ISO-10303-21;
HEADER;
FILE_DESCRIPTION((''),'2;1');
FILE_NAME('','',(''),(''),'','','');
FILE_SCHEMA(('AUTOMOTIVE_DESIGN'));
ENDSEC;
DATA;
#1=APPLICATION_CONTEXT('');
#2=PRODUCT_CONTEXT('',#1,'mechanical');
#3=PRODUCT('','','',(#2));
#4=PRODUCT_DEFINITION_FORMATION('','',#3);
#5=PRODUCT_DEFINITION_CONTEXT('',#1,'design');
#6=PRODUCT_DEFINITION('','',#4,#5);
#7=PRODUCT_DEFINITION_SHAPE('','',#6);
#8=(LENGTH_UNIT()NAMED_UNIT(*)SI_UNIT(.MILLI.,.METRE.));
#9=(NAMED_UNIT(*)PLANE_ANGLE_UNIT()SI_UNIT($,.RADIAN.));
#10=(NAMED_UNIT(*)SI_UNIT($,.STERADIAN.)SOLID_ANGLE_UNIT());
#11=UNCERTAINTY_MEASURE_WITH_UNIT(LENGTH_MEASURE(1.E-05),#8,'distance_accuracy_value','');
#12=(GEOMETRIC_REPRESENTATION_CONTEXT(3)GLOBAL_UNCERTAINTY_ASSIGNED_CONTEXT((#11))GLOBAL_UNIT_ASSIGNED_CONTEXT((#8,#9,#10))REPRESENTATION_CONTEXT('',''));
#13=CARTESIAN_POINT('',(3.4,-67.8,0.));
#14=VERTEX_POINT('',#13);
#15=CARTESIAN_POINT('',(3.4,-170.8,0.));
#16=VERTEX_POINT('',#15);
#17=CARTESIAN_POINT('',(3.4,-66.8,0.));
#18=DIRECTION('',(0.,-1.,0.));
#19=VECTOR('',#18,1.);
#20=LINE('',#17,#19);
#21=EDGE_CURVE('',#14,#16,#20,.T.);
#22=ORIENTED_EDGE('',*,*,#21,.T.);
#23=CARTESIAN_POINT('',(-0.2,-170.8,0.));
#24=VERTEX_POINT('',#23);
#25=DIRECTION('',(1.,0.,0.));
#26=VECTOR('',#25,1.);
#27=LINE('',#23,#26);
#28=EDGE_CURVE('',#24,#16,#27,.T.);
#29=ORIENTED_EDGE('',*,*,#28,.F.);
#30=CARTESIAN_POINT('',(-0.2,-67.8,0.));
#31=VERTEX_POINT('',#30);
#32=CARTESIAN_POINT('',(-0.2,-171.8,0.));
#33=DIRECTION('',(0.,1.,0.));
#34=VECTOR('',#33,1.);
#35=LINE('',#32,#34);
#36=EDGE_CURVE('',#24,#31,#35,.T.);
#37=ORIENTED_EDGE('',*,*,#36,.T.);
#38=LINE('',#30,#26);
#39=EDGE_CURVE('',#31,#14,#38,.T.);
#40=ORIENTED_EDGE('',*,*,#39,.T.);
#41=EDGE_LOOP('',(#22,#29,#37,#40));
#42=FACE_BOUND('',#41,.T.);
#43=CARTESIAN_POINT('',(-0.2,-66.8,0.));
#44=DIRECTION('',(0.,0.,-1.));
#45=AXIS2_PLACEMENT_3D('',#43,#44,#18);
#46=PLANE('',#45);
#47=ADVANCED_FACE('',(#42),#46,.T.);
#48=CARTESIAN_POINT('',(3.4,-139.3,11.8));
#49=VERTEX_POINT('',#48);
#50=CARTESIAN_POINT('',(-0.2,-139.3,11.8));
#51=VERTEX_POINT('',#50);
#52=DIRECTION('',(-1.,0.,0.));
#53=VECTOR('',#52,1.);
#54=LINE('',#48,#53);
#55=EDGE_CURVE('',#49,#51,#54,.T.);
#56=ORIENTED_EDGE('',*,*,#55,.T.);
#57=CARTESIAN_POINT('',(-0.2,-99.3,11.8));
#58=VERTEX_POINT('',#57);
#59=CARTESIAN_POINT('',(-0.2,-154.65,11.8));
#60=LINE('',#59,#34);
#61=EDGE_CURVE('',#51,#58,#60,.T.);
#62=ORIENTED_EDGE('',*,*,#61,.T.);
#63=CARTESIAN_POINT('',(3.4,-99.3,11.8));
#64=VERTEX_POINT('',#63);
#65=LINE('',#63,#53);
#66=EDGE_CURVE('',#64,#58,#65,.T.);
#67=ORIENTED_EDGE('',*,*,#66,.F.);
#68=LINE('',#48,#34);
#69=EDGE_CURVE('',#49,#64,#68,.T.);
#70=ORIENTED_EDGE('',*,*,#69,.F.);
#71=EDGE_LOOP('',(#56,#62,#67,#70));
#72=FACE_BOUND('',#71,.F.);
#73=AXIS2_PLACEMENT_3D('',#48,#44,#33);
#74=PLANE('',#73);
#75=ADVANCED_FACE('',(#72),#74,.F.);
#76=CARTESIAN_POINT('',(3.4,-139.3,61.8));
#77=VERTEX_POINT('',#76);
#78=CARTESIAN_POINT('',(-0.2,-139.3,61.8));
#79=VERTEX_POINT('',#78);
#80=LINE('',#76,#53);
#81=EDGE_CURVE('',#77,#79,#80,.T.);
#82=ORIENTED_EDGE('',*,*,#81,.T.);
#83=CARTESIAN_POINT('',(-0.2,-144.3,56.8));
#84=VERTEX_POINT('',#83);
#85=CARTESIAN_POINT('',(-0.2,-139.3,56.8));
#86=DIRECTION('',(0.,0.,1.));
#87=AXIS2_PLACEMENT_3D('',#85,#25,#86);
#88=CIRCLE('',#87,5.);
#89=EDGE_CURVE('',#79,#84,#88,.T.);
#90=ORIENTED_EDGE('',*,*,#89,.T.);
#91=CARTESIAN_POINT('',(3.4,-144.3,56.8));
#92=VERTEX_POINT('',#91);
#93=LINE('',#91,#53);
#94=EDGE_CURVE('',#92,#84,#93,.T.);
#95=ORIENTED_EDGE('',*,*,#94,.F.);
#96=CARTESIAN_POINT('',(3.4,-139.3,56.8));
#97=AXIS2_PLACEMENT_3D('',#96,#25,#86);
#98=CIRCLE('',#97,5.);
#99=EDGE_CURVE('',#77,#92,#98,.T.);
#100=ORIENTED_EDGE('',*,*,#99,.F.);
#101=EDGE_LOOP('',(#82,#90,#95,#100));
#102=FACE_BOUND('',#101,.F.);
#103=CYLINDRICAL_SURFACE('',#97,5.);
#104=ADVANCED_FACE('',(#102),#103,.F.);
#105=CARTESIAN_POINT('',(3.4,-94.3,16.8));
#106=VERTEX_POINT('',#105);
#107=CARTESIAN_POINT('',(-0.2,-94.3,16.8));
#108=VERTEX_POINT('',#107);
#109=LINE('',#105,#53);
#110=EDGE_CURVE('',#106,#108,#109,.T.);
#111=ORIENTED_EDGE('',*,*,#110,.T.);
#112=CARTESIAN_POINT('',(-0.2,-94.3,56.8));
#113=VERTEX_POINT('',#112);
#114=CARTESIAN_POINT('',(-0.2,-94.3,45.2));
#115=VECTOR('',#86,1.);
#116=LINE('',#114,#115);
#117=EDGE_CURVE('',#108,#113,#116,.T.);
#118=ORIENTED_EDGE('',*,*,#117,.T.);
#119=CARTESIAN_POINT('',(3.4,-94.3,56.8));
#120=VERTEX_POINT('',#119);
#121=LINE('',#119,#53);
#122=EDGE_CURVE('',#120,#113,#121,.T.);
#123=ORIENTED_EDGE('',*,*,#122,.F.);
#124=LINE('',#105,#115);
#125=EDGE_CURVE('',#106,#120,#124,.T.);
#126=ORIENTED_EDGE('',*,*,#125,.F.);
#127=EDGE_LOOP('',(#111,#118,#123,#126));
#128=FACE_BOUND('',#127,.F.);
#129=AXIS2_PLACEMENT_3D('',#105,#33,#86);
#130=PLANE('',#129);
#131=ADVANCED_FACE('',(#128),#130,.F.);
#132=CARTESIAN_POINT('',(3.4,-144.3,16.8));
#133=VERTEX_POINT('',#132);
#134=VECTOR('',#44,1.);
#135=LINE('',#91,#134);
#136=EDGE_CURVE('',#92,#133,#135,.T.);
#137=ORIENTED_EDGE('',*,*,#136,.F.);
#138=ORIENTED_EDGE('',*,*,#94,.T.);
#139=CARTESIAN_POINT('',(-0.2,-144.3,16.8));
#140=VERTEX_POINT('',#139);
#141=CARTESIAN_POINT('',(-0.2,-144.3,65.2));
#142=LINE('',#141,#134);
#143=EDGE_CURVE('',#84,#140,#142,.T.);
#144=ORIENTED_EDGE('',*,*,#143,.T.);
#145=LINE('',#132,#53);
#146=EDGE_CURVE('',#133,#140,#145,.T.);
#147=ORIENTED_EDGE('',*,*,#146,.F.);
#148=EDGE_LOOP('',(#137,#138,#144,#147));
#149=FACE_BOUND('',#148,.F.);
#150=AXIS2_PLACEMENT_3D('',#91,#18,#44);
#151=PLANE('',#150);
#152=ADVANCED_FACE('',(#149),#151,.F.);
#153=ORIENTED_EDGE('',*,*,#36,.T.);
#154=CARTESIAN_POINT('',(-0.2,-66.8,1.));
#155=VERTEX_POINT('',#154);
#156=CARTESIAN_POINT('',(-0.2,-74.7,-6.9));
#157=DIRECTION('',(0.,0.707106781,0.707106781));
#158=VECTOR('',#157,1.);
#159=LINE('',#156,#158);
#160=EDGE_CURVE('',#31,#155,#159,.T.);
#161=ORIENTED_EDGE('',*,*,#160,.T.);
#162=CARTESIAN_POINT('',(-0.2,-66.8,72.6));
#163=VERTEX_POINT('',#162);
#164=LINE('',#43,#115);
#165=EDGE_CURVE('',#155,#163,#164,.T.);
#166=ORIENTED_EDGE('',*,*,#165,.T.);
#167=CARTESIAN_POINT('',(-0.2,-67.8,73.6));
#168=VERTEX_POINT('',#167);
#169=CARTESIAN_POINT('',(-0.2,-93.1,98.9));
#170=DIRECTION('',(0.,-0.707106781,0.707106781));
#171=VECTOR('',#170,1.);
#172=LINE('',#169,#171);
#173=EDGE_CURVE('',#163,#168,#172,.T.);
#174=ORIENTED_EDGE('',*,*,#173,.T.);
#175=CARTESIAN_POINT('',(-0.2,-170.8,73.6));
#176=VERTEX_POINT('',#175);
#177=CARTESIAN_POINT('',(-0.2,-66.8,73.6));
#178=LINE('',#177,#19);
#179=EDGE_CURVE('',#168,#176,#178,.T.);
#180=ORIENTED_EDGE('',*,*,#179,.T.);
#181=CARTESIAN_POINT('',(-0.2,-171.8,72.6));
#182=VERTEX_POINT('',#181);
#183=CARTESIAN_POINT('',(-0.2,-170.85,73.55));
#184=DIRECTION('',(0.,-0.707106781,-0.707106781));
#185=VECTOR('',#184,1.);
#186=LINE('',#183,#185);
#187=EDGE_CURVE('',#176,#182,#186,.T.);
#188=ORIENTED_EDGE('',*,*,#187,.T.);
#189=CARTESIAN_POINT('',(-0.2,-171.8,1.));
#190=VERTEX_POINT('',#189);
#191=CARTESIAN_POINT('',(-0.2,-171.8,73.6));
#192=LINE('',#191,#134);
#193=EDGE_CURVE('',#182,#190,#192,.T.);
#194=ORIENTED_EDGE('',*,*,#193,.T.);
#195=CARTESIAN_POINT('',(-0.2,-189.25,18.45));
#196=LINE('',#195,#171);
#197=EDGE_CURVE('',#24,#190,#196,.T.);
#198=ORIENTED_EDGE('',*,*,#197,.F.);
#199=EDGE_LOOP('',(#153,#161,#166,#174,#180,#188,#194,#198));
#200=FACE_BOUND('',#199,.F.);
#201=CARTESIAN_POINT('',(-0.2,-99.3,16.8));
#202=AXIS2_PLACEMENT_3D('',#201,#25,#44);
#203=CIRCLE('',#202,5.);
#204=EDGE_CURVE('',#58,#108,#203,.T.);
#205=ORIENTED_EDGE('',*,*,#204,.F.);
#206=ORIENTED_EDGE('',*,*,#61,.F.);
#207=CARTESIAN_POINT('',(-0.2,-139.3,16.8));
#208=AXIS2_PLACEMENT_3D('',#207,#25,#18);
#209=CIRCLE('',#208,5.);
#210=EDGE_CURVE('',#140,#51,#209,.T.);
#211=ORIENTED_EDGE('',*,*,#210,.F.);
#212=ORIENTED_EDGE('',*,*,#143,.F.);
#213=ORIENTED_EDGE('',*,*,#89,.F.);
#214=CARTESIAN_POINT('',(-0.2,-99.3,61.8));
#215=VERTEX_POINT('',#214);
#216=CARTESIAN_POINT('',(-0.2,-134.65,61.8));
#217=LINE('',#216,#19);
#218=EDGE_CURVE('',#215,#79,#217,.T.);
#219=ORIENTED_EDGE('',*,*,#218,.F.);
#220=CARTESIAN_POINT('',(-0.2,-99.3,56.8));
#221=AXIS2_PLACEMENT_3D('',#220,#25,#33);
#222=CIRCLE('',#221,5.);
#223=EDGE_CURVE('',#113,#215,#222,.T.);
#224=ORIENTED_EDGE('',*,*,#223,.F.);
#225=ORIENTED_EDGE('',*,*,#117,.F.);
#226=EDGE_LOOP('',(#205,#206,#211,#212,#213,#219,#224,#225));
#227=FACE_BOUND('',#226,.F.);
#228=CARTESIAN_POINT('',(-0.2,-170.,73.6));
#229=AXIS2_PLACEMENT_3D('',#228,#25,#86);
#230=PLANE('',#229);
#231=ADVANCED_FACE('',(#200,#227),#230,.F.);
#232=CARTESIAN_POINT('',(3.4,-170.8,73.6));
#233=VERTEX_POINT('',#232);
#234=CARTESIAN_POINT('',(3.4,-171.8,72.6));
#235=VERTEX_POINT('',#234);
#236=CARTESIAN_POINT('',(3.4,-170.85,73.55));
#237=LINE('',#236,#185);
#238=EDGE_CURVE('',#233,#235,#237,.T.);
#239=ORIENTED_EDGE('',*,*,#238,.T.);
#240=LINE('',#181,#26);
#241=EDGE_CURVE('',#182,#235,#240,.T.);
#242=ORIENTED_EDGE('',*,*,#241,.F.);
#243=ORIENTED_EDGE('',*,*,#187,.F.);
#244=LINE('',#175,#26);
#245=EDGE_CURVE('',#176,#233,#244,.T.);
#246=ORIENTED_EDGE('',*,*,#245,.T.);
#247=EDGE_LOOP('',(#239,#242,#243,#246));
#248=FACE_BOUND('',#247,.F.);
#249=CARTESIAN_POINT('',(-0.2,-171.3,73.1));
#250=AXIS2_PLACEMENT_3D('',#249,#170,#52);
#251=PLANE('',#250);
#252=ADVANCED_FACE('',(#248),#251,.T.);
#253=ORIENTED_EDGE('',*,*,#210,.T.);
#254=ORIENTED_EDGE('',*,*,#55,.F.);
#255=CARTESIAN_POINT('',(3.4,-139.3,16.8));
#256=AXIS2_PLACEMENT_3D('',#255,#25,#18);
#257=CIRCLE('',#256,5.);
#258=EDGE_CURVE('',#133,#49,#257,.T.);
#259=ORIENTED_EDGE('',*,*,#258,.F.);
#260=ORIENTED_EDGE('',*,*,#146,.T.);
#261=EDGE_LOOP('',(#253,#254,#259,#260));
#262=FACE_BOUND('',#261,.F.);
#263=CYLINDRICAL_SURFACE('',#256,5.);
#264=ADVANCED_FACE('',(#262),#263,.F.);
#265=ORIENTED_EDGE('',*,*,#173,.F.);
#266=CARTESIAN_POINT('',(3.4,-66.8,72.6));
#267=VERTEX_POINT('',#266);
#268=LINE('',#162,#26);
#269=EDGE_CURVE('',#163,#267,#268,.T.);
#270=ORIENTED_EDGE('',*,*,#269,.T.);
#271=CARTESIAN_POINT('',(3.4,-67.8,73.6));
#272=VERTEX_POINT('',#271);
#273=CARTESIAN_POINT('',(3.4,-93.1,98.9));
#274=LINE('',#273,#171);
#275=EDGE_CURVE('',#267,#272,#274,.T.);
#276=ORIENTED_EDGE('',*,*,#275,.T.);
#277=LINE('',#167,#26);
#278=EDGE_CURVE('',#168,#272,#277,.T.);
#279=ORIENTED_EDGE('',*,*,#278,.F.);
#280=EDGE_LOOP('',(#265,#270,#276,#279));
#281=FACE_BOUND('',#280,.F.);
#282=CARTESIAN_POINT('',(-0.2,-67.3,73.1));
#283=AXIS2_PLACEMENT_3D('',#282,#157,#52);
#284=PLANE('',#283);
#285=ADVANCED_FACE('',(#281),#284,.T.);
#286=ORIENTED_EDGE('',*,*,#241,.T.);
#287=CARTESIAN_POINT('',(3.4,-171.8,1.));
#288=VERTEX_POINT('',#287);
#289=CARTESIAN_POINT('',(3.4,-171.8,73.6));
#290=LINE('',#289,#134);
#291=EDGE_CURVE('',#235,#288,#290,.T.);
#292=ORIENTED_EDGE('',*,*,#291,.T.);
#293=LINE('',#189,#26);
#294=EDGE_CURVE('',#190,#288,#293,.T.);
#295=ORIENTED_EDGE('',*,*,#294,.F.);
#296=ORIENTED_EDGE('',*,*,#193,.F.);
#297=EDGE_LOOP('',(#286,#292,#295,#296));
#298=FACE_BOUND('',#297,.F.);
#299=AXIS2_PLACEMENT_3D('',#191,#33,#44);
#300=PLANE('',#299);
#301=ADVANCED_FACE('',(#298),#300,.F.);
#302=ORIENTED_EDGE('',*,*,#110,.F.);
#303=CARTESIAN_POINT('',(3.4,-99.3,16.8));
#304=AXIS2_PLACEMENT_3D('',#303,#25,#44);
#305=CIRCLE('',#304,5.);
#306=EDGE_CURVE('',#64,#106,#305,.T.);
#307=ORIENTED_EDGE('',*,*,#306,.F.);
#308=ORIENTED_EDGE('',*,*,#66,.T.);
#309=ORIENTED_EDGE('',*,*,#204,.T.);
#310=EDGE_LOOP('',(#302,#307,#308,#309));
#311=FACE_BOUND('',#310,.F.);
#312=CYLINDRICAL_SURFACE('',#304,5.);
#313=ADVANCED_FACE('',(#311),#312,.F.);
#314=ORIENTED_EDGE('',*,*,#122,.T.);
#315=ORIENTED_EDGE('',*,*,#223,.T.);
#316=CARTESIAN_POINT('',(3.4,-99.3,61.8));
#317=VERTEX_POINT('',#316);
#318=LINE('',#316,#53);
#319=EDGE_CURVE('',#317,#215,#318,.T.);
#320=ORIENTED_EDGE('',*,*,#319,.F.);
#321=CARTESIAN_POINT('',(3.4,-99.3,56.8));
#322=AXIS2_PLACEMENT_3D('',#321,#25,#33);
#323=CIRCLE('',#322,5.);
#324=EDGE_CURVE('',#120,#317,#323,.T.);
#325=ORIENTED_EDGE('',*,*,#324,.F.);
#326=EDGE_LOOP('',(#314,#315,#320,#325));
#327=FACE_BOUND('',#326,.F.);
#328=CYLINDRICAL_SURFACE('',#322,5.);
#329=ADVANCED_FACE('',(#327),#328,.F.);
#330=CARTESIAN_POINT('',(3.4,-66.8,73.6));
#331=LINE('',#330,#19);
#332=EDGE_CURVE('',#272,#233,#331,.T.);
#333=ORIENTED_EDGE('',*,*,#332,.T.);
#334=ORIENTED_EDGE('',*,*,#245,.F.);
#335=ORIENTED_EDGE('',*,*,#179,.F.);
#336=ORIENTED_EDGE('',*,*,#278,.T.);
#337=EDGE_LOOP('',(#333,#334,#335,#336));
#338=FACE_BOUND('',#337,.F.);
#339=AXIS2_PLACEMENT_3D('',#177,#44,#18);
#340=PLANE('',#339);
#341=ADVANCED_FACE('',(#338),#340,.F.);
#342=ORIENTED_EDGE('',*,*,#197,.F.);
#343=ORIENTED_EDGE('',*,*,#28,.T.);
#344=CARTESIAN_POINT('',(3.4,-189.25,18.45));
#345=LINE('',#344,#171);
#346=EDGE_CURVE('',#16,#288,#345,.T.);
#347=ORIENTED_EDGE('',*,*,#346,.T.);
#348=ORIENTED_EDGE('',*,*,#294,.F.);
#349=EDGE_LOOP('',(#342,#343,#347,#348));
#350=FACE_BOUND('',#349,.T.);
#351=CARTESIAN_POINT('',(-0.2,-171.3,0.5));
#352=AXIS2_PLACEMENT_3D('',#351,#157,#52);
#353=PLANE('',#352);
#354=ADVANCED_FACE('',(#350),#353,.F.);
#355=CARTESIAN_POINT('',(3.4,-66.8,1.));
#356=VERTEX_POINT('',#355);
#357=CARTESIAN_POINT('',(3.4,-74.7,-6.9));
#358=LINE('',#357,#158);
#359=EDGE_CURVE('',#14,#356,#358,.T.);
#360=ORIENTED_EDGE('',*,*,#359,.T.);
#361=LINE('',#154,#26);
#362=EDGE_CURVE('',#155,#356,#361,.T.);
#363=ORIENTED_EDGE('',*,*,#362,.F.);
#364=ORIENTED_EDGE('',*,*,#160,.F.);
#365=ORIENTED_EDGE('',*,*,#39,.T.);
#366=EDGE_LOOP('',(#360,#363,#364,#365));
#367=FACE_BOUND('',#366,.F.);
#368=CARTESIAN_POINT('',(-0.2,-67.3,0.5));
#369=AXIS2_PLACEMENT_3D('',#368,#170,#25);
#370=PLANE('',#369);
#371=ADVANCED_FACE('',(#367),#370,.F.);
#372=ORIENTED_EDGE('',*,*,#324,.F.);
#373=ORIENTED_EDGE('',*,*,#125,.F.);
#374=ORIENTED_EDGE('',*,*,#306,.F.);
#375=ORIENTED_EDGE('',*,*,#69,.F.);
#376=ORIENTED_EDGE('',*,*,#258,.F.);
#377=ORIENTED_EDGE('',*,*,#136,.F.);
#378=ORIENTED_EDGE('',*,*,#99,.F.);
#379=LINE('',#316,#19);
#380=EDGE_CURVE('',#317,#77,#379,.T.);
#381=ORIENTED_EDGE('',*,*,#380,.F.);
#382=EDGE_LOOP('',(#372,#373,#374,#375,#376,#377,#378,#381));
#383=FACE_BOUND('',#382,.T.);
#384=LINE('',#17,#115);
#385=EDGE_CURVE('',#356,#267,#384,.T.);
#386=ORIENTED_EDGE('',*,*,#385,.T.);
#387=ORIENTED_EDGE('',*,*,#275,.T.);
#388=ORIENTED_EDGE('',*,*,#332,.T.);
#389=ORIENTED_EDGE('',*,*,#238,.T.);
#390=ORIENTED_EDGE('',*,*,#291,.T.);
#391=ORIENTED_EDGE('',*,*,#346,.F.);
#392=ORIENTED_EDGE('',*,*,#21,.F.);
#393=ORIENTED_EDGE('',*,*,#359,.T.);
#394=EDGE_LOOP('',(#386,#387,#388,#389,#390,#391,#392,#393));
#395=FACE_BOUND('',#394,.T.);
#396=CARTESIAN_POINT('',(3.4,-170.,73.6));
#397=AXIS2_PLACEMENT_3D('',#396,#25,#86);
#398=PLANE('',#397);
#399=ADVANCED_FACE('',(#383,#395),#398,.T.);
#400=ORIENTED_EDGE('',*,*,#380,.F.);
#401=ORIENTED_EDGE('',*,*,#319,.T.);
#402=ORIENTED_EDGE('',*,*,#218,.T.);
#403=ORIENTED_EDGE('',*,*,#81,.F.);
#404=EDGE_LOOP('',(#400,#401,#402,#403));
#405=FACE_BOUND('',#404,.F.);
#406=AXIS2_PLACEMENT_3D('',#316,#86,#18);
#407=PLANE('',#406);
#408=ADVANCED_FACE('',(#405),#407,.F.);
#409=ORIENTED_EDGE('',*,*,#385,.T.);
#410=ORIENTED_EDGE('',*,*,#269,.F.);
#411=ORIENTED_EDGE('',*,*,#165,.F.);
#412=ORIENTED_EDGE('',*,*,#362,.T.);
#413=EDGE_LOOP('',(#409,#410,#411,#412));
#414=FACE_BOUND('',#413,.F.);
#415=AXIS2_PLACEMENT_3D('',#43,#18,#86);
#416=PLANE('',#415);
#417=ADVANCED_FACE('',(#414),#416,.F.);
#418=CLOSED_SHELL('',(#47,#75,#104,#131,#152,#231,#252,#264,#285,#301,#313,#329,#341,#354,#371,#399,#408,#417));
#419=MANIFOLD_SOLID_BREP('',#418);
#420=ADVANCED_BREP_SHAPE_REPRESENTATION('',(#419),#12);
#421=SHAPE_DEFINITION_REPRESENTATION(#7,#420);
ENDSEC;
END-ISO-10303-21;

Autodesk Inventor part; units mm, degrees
ref_plane "YZ Plane" through (0, 0, 0) normal (1, 0, 0) x (0, 1, 0)
ref_plane "XZ Plane" through (0, 0, 0) normal (0, 1, 0) x (-1, 0, 0)
ref_plane "XY Plane" through (0, 0, 0) normal (0, 0, 1) x (1, 0, 0)
ref_plane "Work Plane1" through (0, 0, 0) normal (0, 0, 1) x (1, 0, 0)
ref_plane "Work Plane2" through (-0.2, -170, 73.6) normal (1, 0, 0) x (0, 0, 1)
sketch "Sketch2" plane through (-0.2, -170, 73.6) normal (1, 0, 0) x (0, 0, 1)
  line L0 (-73.6, -170) -> (-73.6, 0) projected
  line L1 (0, 1.8) -> (-73.6, 1.8)
  line L2 (-73.6, 1.8) -> (-73.6, -103.2)
  line L3 (-73.6, -103.2) -> (0, -103.2)
  line L4 (0, -103.2) -> (0, 1.8)
  dimension "d0" = 105
extrude "Extrusion1" add sketch "Sketch2" along normal blind 3.6
sketch "Sketch3" plane through (3.4, -170, 73.6) normal (1, 0, 0) x (0, 0, -1)
  line L0 (73.6, -1.8) -> (73.6, 103.2) projected
  line L1 (73.6, 103.2) -> (0, 103.2) projected
  line L2 (0, 103.2) -> (0, -1.8) projected
  line L3 (0, -1.8) -> (73.6, -1.8) projected
  line L4 (73.6, 103.2) -> (0, 103.2) construction
  line L5 (73.6, -1.8) -> (73.6, 103.2) construction
  line L6 (36.8, 103.2) -> (73.6, 103.2) construction
  line L7 (73.6, 103.2) -> (73.6, 50.7) construction
  line L8 (73.6, 50.7) -> (36.8, 50.7) construction
  line L9 (36.8, 50.7) -> (36.8, 103.2) construction
  line L10 (16.8, 25.7) -> (56.8, 25.7)
  line L11 (61.8, 30.7) -> (61.8, 70.7)
  line L12 (56.8, 75.7) -> (16.8, 75.7)
  line L13 (11.8, 70.7) -> (11.8, 30.7)
  line L14 (11.8, 25.7) -> (61.8, 75.7) construction
  line L15 (61.8, 25.7) -> (11.8, 75.7) construction
  arc A0 (16.8, 75.7) -> (11.8, 70.7) centre (16.8, 70.7) ccw
  arc A1 (61.8, 70.7) -> (56.8, 75.7) centre (56.8, 70.7) ccw
  arc A2 (56.8, 25.7) -> (61.8, 30.7) centre (56.8, 30.7) ccw
  arc A3 (11.8, 30.7) -> (16.8, 25.7) centre (16.8, 30.7) ccw
  point P0 (73.6, 170)
  dimension "d3" = 50
  dimension "d4" = 50
  dimension "d5" = 5
extrude "Extrusion2" cut sketch "Sketch3" against normal through all contours A3 L13 A0 L12 A1 L11 A2 L10
chamfer "Chamfer1" distance 1 angle 45 4 edges at (1.6, -66.8, 73.6) (1.6, -171.8, 73.6) (1.6, -66.8, 0) (1.6, -171.8, 0)
equation "\"d1\" = wood_thickness"
equation "\"wood_thickness\" = 3.6"
properties part number "cover_components"
